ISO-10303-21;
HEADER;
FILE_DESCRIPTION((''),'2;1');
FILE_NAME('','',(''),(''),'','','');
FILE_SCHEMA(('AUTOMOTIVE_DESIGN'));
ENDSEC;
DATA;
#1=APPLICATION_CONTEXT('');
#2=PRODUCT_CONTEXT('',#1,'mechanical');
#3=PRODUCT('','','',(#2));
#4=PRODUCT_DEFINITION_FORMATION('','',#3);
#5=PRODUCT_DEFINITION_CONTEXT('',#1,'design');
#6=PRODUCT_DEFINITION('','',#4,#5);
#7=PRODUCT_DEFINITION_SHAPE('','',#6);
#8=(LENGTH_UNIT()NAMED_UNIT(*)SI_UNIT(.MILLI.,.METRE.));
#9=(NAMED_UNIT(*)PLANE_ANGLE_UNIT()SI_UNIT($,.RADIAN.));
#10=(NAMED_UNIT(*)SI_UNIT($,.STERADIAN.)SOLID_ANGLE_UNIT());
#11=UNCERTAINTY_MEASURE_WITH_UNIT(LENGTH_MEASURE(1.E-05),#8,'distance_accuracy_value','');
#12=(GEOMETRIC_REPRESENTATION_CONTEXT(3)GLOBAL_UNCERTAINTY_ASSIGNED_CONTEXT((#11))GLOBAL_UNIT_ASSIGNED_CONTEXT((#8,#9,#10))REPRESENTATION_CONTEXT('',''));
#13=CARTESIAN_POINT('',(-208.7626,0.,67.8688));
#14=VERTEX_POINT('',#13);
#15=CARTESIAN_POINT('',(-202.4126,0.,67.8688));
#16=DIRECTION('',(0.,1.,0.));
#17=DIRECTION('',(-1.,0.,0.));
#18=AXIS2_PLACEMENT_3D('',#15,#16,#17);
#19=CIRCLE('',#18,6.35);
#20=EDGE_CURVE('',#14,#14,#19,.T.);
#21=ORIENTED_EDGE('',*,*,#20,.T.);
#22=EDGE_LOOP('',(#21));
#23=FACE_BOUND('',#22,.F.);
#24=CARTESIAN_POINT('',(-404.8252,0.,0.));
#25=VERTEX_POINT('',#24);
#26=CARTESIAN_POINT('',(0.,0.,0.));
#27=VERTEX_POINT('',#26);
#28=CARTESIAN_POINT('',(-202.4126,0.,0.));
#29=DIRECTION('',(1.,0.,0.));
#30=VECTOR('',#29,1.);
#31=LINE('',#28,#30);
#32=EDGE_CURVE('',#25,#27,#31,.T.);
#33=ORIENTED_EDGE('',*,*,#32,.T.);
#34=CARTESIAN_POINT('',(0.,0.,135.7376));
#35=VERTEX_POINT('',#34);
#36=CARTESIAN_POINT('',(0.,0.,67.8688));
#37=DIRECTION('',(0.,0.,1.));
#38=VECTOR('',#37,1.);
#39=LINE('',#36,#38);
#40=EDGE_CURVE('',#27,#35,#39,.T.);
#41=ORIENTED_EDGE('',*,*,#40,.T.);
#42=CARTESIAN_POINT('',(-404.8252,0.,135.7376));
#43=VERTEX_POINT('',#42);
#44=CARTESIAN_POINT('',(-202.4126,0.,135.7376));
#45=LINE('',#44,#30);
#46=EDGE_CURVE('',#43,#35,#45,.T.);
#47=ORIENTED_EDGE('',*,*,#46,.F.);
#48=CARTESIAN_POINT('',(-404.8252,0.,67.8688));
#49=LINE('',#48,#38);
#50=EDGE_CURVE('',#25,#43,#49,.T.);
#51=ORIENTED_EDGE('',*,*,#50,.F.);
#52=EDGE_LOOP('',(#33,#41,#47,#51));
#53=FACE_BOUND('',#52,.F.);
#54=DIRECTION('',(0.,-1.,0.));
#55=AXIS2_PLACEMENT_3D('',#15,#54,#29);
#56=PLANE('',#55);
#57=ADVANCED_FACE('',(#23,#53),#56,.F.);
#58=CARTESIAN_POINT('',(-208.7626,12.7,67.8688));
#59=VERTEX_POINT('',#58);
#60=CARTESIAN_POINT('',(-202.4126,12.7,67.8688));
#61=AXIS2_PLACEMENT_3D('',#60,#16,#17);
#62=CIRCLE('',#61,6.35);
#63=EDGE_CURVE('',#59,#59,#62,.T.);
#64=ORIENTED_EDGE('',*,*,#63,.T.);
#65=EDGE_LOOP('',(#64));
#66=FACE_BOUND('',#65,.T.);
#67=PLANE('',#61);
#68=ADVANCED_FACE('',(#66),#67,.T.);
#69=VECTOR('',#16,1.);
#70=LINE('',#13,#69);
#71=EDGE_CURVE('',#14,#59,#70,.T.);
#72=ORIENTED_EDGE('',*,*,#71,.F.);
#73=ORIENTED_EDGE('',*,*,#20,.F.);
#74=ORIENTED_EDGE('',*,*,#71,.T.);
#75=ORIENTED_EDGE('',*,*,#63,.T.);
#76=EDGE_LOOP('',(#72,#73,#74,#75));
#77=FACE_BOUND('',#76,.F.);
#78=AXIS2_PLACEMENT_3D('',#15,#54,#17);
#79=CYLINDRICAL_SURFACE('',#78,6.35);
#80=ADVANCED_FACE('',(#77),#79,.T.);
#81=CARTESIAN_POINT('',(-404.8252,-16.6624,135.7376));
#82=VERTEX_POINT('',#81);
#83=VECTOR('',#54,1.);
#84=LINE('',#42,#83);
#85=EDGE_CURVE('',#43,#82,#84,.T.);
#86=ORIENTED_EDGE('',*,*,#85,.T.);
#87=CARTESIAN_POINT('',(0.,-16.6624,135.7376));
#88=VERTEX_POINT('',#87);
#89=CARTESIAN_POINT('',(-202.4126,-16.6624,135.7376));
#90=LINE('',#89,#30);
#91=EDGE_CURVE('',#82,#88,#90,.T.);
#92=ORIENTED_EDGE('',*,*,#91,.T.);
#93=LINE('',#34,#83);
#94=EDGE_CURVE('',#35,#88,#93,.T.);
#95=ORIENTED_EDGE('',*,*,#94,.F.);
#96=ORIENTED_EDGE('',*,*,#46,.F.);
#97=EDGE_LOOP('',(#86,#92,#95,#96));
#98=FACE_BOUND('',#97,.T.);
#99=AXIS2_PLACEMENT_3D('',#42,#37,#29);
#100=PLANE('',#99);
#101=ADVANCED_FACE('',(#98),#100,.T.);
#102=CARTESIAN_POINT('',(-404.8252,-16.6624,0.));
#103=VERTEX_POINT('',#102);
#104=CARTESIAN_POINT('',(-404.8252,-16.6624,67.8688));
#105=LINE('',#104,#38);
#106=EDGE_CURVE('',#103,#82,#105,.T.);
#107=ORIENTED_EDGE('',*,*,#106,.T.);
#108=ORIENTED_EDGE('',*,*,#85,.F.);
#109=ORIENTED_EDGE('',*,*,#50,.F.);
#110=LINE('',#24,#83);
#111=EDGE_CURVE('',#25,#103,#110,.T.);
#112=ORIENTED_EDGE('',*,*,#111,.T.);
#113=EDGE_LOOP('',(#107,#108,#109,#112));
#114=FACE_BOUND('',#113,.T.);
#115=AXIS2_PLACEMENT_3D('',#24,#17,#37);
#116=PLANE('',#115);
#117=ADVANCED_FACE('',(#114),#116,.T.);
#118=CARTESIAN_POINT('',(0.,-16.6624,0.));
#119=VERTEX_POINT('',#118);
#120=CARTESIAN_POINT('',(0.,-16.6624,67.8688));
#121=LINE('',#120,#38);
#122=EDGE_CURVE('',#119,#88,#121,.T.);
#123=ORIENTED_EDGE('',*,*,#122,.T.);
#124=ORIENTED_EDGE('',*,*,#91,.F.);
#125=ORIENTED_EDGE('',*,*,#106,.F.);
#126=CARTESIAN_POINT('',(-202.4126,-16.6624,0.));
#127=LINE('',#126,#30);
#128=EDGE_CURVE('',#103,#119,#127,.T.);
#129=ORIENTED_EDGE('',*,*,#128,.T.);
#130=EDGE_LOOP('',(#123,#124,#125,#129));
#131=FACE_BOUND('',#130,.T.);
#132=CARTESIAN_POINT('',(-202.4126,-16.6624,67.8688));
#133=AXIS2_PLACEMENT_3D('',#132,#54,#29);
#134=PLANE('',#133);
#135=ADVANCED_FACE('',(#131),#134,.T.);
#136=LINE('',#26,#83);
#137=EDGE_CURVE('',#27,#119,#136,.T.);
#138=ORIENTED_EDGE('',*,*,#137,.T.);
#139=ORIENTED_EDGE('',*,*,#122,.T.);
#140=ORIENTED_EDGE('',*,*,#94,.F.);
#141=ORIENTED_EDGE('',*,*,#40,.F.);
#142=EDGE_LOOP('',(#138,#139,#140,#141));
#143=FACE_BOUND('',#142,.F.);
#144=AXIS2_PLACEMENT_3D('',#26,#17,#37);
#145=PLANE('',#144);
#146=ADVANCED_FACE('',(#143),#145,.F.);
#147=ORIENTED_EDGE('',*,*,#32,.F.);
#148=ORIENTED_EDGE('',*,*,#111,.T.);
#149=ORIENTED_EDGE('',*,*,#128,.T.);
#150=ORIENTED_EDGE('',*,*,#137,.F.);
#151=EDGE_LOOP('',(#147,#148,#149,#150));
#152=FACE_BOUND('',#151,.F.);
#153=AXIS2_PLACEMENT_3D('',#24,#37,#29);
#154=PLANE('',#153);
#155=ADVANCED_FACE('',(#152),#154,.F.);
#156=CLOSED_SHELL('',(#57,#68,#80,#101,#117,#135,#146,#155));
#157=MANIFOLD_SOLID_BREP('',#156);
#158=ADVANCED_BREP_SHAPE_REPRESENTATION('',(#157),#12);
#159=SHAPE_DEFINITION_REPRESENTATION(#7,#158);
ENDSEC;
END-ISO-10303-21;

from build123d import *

# Parameters (mm, degrees)
F1_W     = 404.8252
F1_H     = 135.7376
F2_DEPTH = 16.6624
F3_R     = 6.35
F4_DEPTH = 12.7


# Not quite as in the source:
# - a variable given as a bare number and used for a length is read in inches; the dataset says mm whatever the document's units were


with BuildPart() as f2:
    # F1 (on Front) → F2 (new body)
    with BuildSketch(Plane.XZ):
        with Locations((-202.4126, 67.8688)):
            Rectangle(F1_W, F1_H)
    extrude(amount=F2_DEPTH)

    # F3 (on face) → F4 (join)
    with BuildSketch(Plane(origin=(0, 0, 0), x_dir=(-1, 0, 0), z_dir=(0, 1, 0))):
        with Locations((202.4126, 67.8688)):
            Circle(F3_R)
    extrude(amount=F4_DEPTH)


solid = f2.part
